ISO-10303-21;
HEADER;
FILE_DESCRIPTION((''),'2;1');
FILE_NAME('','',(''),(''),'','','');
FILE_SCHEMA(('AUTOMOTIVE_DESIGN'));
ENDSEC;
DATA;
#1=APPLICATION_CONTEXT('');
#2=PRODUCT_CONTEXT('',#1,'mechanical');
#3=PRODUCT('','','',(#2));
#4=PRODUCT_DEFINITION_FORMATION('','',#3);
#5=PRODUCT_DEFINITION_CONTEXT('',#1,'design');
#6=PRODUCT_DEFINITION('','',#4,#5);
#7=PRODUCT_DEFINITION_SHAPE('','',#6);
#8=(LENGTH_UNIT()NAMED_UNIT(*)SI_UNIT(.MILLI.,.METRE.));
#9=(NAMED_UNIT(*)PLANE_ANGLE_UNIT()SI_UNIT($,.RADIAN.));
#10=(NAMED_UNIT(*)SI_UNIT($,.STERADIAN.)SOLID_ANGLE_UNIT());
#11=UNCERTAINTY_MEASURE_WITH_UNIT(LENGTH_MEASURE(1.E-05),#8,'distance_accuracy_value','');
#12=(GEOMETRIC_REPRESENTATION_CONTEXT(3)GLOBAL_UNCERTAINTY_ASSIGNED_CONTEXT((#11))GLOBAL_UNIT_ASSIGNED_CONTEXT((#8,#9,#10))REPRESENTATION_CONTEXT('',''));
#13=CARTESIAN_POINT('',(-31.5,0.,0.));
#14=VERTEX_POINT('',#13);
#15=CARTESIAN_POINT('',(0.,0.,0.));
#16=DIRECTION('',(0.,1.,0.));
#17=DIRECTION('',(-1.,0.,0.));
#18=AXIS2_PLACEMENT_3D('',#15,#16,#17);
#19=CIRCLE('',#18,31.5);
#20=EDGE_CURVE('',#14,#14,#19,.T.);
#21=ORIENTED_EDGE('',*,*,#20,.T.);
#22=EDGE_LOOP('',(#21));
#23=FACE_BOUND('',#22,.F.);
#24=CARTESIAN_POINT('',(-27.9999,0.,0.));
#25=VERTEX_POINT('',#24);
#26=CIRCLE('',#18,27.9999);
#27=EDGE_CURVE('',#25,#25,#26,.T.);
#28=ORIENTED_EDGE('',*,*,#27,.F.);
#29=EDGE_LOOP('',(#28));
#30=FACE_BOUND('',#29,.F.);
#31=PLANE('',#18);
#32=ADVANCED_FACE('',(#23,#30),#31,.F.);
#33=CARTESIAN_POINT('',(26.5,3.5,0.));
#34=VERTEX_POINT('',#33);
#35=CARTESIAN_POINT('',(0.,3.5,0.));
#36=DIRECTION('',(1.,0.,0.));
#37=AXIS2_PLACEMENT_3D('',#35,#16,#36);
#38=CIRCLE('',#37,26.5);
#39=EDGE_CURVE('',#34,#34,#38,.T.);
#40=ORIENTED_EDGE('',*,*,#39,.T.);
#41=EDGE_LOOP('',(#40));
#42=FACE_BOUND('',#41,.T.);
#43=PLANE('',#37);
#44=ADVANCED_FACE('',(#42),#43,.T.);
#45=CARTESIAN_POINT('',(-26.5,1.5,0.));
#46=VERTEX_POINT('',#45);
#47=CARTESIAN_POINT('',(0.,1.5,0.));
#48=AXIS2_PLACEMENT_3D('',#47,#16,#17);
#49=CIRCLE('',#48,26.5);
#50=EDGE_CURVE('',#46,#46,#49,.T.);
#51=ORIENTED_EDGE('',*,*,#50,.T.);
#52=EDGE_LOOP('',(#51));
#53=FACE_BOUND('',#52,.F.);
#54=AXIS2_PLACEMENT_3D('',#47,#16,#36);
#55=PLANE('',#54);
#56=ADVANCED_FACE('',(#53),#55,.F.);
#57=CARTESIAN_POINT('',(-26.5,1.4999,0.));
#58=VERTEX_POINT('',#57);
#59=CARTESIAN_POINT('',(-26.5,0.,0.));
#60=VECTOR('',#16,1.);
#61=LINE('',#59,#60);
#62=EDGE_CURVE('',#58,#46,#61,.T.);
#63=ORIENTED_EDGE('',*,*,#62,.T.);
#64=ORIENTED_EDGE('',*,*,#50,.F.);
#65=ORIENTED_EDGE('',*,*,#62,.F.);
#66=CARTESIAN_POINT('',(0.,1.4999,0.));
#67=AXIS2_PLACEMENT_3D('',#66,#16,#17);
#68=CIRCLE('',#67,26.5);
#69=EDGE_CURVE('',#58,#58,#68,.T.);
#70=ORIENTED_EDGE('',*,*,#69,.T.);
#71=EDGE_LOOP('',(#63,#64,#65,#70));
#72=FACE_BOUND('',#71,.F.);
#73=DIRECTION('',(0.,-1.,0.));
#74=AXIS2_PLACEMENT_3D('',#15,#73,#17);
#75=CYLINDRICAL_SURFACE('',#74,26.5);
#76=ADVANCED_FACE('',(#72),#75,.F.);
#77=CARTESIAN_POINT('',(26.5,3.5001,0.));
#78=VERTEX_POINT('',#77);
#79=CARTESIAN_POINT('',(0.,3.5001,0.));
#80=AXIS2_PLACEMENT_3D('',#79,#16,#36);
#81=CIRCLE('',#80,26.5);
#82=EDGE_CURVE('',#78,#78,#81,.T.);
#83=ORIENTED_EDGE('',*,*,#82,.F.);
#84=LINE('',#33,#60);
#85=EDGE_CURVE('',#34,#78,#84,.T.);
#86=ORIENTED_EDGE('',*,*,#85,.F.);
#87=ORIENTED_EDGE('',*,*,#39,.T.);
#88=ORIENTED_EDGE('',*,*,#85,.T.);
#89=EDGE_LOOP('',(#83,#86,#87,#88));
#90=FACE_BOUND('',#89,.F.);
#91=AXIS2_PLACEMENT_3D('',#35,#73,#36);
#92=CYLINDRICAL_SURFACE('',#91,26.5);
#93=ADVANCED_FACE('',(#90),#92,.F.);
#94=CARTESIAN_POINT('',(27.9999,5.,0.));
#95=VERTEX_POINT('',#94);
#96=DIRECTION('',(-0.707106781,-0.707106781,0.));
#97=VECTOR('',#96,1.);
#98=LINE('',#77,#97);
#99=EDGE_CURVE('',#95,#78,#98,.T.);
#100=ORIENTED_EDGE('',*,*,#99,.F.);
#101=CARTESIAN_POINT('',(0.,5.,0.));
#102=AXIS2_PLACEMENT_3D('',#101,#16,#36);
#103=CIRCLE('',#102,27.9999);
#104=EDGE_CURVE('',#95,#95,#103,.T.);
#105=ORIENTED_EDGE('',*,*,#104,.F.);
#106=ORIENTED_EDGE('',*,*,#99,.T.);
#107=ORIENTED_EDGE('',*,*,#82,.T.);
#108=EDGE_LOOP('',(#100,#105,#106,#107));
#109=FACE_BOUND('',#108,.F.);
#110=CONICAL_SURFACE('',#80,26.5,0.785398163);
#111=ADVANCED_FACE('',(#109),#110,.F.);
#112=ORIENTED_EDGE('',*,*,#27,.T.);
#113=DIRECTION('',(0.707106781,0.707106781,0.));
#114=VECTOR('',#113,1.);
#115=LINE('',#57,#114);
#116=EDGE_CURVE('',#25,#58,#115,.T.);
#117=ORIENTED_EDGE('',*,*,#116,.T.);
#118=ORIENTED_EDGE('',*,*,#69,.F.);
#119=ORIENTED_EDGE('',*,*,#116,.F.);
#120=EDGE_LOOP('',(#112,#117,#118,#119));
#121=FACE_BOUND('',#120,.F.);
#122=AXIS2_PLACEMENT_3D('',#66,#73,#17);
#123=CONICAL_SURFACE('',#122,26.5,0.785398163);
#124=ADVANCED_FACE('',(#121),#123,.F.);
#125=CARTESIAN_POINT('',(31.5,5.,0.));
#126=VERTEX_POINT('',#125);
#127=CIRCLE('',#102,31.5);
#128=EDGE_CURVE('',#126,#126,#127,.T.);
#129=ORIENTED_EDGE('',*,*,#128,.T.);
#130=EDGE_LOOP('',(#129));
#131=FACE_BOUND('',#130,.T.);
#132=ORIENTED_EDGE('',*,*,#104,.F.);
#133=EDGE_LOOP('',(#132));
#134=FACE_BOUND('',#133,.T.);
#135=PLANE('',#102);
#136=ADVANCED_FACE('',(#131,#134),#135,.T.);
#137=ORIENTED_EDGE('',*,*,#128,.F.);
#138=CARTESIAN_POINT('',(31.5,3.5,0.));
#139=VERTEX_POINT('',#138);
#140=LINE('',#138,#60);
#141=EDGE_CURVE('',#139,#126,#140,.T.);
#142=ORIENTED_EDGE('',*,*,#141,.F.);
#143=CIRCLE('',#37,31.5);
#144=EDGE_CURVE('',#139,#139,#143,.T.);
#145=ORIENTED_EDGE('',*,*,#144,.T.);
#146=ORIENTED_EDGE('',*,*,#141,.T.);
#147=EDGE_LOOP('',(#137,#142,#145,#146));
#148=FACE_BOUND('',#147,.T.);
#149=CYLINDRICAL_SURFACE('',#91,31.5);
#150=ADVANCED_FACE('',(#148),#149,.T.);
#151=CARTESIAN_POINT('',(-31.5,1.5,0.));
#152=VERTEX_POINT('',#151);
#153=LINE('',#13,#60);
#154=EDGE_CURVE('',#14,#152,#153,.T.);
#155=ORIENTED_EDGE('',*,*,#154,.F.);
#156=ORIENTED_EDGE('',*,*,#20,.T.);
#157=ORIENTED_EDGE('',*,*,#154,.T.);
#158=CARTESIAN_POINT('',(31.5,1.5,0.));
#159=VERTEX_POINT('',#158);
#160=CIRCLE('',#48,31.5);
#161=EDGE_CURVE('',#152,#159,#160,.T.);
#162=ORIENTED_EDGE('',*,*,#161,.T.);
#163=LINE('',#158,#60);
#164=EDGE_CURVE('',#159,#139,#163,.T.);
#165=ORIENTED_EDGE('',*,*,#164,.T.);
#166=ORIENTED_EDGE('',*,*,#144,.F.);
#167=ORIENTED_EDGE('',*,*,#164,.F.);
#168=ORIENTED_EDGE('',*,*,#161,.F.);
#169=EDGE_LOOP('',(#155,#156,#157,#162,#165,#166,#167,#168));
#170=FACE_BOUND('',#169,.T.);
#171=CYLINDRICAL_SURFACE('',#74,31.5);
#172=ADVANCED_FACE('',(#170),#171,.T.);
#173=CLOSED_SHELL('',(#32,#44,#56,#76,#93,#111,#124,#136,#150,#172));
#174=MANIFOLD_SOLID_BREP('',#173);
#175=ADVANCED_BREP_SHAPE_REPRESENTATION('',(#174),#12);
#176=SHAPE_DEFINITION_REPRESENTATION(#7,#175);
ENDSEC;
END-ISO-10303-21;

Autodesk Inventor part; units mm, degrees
ref_plane "YZ Plane" through (0, 0, 0) normal (1, 0, 0) x (0, 1, 0)
ref_plane "XZ Plane" through (0, 0, 0) normal (0, 1, 0) x (-1, 0, 0)
ref_plane "XY Plane" through (0, 0, 0) normal (0, 0, 1) x (1, 0, 0)
sketch "Skizze1" plane through (0, 0, 0) normal (0, 1, 0) x (-1, 0, 0)
  circle A0 centre (0, 0) radius 31.5
  circle A1 centre (0, 0) radius 26.5
  dimension "d0" = 63
  dimension "d1" = 53
extrude "Extrusion1" add sketch "Skizze1" along normal blind 1.5
sketch "Skizze2" plane through (0, 1.5, 0) normal (0, 1, 0) x (1, 0, 0)
  circle A0 centre (0, 0) radius 31.5
extrude "Extrusion2" add sketch "Skizze2" along normal blind 2
sketch "Skizze3" plane through (0, 3.5, 0) normal (0, 1, 0) x (1, 0, 0)
  circle A0 centre (0, 0) radius 31.5
  circle A1 centre (0, 0) radius 26.5
  dimension "d6" = 53
extrude "Extrusion3" add sketch "Skizze3" along normal blind 1.5
chamfer "Fase1" distance 1.5 angle 45 1 edges at (-26.5, 5, 0)
chamfer "Fase2" distance 1.5 angle 45 1 edges at (26.5, 0, 0)
properties part number "Puk"
